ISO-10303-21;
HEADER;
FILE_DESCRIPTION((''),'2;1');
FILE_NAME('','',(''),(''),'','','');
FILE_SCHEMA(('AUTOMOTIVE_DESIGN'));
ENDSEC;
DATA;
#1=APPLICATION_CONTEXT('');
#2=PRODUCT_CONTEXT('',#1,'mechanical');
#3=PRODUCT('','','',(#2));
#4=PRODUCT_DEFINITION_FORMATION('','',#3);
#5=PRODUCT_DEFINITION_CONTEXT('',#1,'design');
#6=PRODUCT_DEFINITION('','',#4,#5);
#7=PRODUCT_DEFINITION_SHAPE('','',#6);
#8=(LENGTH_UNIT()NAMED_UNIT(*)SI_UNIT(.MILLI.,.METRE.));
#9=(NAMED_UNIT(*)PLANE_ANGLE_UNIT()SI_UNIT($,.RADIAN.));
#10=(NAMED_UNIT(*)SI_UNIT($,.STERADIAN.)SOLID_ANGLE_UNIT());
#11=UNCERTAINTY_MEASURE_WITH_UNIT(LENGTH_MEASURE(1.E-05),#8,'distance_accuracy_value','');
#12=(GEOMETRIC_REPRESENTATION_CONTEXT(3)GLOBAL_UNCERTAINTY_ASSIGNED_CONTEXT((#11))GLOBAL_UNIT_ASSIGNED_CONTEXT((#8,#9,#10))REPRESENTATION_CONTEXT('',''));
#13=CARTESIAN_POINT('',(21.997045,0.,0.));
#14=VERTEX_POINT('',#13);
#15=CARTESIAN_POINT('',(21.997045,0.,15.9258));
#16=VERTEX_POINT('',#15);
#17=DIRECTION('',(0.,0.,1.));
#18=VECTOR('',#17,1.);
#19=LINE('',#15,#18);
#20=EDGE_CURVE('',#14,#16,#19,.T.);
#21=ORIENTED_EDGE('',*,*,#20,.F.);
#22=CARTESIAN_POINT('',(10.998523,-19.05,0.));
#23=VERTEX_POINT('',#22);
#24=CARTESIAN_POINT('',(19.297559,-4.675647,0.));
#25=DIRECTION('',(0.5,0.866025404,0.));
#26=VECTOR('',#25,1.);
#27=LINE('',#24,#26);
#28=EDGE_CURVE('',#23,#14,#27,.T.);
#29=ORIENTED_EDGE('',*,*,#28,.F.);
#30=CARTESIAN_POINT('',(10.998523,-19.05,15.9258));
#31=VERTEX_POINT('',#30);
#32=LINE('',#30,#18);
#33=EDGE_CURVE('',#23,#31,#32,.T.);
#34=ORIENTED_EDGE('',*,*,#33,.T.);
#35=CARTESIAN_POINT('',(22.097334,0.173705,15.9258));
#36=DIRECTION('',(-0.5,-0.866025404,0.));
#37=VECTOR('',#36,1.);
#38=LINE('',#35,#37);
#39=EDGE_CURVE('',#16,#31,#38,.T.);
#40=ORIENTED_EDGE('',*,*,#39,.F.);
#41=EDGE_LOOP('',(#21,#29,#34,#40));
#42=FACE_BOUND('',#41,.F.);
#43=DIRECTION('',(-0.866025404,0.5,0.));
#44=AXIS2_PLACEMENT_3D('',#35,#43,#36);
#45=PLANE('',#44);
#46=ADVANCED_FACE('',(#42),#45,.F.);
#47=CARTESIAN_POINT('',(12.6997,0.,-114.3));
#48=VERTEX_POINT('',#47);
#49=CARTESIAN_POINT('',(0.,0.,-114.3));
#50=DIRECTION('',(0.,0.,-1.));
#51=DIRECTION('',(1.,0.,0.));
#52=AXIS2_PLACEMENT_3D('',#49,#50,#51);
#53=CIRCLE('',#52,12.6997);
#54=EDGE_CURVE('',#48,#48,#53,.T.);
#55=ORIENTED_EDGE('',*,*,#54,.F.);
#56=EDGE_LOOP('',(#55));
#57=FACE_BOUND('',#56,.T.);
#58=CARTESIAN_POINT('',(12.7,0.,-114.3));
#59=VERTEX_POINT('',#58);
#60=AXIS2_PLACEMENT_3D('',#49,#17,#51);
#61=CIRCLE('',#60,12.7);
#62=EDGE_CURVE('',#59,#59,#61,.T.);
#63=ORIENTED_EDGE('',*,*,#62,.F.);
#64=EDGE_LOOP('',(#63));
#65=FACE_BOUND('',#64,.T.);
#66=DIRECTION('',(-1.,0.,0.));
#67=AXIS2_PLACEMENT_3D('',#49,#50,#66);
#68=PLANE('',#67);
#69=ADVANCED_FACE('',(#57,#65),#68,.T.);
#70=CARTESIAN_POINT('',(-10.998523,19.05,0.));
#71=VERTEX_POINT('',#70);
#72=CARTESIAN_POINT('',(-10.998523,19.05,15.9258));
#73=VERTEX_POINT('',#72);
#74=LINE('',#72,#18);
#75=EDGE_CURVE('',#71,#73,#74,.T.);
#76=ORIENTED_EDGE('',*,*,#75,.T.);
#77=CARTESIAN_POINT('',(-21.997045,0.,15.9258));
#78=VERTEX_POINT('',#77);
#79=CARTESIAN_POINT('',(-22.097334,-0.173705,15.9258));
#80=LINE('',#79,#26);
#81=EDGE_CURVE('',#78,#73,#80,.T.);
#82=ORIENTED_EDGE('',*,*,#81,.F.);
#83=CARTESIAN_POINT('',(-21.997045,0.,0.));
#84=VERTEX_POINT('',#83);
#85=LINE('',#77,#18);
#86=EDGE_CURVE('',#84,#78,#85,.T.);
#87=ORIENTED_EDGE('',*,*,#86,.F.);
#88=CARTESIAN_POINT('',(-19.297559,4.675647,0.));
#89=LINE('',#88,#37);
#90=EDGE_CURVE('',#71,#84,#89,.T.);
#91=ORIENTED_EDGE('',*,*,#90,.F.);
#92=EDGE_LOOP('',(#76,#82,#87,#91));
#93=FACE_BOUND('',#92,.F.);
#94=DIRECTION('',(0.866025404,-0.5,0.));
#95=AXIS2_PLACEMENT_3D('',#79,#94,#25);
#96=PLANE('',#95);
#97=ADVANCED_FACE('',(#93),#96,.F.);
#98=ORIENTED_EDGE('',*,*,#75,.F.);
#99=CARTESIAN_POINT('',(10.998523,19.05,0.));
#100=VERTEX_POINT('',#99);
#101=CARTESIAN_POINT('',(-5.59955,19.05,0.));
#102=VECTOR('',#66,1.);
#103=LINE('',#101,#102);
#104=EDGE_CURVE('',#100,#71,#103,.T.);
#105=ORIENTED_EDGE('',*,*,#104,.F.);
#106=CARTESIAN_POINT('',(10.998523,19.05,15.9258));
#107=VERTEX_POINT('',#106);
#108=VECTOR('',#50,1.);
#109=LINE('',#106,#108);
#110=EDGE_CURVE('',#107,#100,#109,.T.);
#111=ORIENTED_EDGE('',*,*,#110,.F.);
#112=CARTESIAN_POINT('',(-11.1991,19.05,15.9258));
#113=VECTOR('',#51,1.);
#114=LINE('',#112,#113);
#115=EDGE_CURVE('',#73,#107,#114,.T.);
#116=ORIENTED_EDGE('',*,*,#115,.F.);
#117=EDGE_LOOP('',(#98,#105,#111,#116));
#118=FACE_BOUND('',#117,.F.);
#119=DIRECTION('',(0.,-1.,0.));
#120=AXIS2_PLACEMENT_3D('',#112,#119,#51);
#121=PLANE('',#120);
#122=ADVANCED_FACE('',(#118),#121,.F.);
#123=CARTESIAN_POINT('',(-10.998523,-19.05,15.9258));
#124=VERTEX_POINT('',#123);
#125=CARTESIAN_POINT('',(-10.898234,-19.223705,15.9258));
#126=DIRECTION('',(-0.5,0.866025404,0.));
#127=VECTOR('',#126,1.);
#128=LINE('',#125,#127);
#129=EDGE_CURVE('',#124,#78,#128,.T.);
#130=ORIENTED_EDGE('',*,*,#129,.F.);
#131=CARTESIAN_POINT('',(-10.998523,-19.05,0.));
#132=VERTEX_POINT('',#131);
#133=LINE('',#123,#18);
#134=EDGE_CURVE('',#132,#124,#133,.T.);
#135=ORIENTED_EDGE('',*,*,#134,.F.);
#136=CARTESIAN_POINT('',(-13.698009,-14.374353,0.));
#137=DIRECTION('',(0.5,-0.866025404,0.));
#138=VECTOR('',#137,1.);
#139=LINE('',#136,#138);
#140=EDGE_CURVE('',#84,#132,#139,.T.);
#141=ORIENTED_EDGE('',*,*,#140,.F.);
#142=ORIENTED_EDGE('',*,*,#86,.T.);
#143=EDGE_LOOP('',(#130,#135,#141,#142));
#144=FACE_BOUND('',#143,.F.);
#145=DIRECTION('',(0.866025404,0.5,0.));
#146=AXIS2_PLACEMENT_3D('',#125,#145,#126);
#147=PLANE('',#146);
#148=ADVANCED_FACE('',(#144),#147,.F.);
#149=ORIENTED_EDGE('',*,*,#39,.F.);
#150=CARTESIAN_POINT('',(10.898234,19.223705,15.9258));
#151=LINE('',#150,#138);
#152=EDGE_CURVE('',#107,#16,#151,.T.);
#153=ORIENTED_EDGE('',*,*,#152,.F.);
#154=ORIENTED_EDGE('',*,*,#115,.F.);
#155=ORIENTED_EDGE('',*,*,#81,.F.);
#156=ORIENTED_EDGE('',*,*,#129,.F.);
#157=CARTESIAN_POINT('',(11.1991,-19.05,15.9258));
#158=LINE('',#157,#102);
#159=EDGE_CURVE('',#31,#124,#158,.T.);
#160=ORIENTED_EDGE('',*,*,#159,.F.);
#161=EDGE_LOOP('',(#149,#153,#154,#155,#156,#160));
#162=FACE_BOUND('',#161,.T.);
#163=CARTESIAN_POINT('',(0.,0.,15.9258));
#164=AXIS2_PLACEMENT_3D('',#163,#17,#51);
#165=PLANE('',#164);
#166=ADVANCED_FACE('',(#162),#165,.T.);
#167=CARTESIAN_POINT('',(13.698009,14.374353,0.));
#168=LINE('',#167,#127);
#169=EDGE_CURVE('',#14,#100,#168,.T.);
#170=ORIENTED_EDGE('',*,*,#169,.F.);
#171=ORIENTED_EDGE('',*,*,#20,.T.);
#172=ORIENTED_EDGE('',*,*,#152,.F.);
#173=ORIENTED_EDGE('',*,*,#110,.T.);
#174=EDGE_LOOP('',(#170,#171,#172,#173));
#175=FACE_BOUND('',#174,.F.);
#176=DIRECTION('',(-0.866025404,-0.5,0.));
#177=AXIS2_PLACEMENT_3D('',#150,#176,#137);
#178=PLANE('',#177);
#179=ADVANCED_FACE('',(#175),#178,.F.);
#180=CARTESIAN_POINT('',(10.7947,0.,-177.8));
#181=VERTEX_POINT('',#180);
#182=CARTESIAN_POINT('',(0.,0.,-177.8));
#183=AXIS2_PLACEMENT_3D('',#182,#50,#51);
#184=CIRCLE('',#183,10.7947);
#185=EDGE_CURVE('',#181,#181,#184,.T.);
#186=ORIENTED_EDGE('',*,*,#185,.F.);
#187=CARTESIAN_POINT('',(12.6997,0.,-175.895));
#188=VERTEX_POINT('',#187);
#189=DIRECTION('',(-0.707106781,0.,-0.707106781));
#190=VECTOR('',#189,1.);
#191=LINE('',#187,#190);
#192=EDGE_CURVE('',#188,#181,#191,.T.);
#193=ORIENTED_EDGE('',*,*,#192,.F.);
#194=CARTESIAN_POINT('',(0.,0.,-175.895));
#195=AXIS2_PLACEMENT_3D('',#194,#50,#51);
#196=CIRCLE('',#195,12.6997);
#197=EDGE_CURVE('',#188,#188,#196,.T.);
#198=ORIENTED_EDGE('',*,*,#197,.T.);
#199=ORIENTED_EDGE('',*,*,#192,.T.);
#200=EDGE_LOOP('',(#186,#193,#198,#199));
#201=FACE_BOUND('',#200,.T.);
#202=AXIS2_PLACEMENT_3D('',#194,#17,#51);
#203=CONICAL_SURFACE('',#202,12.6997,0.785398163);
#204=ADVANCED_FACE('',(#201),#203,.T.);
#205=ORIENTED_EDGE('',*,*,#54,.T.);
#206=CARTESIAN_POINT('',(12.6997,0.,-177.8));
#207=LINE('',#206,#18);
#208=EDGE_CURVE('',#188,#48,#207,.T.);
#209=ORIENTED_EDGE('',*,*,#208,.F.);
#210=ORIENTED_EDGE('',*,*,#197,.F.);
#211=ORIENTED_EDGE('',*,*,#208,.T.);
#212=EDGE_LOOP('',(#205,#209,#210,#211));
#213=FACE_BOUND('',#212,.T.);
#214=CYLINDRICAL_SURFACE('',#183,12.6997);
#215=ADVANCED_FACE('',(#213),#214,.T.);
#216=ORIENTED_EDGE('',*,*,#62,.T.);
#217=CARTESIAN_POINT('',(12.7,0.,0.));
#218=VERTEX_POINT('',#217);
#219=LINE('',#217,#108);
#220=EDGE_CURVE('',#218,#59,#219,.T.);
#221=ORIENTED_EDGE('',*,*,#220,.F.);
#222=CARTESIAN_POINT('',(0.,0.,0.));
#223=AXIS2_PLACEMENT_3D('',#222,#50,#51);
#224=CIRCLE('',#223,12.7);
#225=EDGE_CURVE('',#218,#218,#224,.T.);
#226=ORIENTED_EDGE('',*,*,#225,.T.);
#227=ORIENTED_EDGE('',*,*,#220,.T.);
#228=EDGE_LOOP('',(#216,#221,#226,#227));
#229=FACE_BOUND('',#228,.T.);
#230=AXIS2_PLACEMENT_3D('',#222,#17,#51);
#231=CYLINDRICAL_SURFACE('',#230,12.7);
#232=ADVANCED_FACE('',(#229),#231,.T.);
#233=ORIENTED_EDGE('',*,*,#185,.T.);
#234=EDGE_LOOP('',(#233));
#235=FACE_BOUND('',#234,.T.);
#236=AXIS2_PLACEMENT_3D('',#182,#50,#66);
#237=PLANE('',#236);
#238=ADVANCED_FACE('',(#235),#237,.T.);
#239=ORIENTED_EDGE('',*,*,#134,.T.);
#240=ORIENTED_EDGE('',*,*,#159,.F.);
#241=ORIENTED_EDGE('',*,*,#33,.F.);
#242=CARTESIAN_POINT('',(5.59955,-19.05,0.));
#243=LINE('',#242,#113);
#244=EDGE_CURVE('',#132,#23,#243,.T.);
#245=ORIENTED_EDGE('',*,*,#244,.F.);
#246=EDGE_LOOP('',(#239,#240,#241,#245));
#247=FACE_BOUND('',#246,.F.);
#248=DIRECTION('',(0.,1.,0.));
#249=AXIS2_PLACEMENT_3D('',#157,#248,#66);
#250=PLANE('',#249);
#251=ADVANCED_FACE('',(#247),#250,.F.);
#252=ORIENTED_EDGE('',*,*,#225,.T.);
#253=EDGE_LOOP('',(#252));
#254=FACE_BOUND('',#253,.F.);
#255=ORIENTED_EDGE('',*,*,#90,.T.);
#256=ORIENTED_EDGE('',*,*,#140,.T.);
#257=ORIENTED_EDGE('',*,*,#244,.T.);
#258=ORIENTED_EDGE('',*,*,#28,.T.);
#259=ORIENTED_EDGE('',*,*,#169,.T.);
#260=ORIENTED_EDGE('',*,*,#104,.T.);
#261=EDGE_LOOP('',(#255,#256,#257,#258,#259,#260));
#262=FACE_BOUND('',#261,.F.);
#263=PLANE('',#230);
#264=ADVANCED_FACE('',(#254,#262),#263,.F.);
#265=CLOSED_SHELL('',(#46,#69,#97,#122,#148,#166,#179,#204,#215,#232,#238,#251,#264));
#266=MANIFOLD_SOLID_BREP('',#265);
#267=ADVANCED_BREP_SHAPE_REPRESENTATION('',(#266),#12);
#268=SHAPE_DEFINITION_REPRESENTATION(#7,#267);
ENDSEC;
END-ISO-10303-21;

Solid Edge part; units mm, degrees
sketch "Sketch1" plane through (0, 0, 0) normal (0, 0, 1) x (1, 0, 0)
  circle A0 centre (0, 0) radius 22.098
  dimension "D1" = 44.196
extrude "Protrusion1" add sketch "Sketch1" along normal blind 15.9258
sketch "Sketch2" plane through (0, 0, 0) normal (0, 0, -1) x (1, 0, 0)
  circle A0 centre (0, 0) radius 12.7
extrude "Protrusion2" add sketch "Sketch2" along normal blind 177.8
sketch "Sketch3" plane through (0, 0, -177.8) normal (0, 0, -1) x (1, 0, 0)
  circle A0 centre (0, 0) radius 12.6997
extrude "Cutout1" cut sketch "Sketch3" against normal blind 63.5 flip side to cut
chamfer "Chamfer_1" distance 1.905 angle 45 1 edges at (-12.6997, 0, -177.8)
sketch "Sketch4" plane through (0, 0, 15.9258) normal (0, 0, 1) x (1, 0, 0)
  line L0 (-11.1991, 19.05) -> (11.1991, 19.05)
  dimension "D1" = 38.1
extrude "Cutout2" cut sketch "Sketch4" against normal up to next material side at (0, 19.1, 15.9258)
pattern_circular "Pattern1" count 6 over 360 about axis through (0, 0, 15.9258) along (0, 0, 1) of "Cutout2"
properties part number "24105207"
